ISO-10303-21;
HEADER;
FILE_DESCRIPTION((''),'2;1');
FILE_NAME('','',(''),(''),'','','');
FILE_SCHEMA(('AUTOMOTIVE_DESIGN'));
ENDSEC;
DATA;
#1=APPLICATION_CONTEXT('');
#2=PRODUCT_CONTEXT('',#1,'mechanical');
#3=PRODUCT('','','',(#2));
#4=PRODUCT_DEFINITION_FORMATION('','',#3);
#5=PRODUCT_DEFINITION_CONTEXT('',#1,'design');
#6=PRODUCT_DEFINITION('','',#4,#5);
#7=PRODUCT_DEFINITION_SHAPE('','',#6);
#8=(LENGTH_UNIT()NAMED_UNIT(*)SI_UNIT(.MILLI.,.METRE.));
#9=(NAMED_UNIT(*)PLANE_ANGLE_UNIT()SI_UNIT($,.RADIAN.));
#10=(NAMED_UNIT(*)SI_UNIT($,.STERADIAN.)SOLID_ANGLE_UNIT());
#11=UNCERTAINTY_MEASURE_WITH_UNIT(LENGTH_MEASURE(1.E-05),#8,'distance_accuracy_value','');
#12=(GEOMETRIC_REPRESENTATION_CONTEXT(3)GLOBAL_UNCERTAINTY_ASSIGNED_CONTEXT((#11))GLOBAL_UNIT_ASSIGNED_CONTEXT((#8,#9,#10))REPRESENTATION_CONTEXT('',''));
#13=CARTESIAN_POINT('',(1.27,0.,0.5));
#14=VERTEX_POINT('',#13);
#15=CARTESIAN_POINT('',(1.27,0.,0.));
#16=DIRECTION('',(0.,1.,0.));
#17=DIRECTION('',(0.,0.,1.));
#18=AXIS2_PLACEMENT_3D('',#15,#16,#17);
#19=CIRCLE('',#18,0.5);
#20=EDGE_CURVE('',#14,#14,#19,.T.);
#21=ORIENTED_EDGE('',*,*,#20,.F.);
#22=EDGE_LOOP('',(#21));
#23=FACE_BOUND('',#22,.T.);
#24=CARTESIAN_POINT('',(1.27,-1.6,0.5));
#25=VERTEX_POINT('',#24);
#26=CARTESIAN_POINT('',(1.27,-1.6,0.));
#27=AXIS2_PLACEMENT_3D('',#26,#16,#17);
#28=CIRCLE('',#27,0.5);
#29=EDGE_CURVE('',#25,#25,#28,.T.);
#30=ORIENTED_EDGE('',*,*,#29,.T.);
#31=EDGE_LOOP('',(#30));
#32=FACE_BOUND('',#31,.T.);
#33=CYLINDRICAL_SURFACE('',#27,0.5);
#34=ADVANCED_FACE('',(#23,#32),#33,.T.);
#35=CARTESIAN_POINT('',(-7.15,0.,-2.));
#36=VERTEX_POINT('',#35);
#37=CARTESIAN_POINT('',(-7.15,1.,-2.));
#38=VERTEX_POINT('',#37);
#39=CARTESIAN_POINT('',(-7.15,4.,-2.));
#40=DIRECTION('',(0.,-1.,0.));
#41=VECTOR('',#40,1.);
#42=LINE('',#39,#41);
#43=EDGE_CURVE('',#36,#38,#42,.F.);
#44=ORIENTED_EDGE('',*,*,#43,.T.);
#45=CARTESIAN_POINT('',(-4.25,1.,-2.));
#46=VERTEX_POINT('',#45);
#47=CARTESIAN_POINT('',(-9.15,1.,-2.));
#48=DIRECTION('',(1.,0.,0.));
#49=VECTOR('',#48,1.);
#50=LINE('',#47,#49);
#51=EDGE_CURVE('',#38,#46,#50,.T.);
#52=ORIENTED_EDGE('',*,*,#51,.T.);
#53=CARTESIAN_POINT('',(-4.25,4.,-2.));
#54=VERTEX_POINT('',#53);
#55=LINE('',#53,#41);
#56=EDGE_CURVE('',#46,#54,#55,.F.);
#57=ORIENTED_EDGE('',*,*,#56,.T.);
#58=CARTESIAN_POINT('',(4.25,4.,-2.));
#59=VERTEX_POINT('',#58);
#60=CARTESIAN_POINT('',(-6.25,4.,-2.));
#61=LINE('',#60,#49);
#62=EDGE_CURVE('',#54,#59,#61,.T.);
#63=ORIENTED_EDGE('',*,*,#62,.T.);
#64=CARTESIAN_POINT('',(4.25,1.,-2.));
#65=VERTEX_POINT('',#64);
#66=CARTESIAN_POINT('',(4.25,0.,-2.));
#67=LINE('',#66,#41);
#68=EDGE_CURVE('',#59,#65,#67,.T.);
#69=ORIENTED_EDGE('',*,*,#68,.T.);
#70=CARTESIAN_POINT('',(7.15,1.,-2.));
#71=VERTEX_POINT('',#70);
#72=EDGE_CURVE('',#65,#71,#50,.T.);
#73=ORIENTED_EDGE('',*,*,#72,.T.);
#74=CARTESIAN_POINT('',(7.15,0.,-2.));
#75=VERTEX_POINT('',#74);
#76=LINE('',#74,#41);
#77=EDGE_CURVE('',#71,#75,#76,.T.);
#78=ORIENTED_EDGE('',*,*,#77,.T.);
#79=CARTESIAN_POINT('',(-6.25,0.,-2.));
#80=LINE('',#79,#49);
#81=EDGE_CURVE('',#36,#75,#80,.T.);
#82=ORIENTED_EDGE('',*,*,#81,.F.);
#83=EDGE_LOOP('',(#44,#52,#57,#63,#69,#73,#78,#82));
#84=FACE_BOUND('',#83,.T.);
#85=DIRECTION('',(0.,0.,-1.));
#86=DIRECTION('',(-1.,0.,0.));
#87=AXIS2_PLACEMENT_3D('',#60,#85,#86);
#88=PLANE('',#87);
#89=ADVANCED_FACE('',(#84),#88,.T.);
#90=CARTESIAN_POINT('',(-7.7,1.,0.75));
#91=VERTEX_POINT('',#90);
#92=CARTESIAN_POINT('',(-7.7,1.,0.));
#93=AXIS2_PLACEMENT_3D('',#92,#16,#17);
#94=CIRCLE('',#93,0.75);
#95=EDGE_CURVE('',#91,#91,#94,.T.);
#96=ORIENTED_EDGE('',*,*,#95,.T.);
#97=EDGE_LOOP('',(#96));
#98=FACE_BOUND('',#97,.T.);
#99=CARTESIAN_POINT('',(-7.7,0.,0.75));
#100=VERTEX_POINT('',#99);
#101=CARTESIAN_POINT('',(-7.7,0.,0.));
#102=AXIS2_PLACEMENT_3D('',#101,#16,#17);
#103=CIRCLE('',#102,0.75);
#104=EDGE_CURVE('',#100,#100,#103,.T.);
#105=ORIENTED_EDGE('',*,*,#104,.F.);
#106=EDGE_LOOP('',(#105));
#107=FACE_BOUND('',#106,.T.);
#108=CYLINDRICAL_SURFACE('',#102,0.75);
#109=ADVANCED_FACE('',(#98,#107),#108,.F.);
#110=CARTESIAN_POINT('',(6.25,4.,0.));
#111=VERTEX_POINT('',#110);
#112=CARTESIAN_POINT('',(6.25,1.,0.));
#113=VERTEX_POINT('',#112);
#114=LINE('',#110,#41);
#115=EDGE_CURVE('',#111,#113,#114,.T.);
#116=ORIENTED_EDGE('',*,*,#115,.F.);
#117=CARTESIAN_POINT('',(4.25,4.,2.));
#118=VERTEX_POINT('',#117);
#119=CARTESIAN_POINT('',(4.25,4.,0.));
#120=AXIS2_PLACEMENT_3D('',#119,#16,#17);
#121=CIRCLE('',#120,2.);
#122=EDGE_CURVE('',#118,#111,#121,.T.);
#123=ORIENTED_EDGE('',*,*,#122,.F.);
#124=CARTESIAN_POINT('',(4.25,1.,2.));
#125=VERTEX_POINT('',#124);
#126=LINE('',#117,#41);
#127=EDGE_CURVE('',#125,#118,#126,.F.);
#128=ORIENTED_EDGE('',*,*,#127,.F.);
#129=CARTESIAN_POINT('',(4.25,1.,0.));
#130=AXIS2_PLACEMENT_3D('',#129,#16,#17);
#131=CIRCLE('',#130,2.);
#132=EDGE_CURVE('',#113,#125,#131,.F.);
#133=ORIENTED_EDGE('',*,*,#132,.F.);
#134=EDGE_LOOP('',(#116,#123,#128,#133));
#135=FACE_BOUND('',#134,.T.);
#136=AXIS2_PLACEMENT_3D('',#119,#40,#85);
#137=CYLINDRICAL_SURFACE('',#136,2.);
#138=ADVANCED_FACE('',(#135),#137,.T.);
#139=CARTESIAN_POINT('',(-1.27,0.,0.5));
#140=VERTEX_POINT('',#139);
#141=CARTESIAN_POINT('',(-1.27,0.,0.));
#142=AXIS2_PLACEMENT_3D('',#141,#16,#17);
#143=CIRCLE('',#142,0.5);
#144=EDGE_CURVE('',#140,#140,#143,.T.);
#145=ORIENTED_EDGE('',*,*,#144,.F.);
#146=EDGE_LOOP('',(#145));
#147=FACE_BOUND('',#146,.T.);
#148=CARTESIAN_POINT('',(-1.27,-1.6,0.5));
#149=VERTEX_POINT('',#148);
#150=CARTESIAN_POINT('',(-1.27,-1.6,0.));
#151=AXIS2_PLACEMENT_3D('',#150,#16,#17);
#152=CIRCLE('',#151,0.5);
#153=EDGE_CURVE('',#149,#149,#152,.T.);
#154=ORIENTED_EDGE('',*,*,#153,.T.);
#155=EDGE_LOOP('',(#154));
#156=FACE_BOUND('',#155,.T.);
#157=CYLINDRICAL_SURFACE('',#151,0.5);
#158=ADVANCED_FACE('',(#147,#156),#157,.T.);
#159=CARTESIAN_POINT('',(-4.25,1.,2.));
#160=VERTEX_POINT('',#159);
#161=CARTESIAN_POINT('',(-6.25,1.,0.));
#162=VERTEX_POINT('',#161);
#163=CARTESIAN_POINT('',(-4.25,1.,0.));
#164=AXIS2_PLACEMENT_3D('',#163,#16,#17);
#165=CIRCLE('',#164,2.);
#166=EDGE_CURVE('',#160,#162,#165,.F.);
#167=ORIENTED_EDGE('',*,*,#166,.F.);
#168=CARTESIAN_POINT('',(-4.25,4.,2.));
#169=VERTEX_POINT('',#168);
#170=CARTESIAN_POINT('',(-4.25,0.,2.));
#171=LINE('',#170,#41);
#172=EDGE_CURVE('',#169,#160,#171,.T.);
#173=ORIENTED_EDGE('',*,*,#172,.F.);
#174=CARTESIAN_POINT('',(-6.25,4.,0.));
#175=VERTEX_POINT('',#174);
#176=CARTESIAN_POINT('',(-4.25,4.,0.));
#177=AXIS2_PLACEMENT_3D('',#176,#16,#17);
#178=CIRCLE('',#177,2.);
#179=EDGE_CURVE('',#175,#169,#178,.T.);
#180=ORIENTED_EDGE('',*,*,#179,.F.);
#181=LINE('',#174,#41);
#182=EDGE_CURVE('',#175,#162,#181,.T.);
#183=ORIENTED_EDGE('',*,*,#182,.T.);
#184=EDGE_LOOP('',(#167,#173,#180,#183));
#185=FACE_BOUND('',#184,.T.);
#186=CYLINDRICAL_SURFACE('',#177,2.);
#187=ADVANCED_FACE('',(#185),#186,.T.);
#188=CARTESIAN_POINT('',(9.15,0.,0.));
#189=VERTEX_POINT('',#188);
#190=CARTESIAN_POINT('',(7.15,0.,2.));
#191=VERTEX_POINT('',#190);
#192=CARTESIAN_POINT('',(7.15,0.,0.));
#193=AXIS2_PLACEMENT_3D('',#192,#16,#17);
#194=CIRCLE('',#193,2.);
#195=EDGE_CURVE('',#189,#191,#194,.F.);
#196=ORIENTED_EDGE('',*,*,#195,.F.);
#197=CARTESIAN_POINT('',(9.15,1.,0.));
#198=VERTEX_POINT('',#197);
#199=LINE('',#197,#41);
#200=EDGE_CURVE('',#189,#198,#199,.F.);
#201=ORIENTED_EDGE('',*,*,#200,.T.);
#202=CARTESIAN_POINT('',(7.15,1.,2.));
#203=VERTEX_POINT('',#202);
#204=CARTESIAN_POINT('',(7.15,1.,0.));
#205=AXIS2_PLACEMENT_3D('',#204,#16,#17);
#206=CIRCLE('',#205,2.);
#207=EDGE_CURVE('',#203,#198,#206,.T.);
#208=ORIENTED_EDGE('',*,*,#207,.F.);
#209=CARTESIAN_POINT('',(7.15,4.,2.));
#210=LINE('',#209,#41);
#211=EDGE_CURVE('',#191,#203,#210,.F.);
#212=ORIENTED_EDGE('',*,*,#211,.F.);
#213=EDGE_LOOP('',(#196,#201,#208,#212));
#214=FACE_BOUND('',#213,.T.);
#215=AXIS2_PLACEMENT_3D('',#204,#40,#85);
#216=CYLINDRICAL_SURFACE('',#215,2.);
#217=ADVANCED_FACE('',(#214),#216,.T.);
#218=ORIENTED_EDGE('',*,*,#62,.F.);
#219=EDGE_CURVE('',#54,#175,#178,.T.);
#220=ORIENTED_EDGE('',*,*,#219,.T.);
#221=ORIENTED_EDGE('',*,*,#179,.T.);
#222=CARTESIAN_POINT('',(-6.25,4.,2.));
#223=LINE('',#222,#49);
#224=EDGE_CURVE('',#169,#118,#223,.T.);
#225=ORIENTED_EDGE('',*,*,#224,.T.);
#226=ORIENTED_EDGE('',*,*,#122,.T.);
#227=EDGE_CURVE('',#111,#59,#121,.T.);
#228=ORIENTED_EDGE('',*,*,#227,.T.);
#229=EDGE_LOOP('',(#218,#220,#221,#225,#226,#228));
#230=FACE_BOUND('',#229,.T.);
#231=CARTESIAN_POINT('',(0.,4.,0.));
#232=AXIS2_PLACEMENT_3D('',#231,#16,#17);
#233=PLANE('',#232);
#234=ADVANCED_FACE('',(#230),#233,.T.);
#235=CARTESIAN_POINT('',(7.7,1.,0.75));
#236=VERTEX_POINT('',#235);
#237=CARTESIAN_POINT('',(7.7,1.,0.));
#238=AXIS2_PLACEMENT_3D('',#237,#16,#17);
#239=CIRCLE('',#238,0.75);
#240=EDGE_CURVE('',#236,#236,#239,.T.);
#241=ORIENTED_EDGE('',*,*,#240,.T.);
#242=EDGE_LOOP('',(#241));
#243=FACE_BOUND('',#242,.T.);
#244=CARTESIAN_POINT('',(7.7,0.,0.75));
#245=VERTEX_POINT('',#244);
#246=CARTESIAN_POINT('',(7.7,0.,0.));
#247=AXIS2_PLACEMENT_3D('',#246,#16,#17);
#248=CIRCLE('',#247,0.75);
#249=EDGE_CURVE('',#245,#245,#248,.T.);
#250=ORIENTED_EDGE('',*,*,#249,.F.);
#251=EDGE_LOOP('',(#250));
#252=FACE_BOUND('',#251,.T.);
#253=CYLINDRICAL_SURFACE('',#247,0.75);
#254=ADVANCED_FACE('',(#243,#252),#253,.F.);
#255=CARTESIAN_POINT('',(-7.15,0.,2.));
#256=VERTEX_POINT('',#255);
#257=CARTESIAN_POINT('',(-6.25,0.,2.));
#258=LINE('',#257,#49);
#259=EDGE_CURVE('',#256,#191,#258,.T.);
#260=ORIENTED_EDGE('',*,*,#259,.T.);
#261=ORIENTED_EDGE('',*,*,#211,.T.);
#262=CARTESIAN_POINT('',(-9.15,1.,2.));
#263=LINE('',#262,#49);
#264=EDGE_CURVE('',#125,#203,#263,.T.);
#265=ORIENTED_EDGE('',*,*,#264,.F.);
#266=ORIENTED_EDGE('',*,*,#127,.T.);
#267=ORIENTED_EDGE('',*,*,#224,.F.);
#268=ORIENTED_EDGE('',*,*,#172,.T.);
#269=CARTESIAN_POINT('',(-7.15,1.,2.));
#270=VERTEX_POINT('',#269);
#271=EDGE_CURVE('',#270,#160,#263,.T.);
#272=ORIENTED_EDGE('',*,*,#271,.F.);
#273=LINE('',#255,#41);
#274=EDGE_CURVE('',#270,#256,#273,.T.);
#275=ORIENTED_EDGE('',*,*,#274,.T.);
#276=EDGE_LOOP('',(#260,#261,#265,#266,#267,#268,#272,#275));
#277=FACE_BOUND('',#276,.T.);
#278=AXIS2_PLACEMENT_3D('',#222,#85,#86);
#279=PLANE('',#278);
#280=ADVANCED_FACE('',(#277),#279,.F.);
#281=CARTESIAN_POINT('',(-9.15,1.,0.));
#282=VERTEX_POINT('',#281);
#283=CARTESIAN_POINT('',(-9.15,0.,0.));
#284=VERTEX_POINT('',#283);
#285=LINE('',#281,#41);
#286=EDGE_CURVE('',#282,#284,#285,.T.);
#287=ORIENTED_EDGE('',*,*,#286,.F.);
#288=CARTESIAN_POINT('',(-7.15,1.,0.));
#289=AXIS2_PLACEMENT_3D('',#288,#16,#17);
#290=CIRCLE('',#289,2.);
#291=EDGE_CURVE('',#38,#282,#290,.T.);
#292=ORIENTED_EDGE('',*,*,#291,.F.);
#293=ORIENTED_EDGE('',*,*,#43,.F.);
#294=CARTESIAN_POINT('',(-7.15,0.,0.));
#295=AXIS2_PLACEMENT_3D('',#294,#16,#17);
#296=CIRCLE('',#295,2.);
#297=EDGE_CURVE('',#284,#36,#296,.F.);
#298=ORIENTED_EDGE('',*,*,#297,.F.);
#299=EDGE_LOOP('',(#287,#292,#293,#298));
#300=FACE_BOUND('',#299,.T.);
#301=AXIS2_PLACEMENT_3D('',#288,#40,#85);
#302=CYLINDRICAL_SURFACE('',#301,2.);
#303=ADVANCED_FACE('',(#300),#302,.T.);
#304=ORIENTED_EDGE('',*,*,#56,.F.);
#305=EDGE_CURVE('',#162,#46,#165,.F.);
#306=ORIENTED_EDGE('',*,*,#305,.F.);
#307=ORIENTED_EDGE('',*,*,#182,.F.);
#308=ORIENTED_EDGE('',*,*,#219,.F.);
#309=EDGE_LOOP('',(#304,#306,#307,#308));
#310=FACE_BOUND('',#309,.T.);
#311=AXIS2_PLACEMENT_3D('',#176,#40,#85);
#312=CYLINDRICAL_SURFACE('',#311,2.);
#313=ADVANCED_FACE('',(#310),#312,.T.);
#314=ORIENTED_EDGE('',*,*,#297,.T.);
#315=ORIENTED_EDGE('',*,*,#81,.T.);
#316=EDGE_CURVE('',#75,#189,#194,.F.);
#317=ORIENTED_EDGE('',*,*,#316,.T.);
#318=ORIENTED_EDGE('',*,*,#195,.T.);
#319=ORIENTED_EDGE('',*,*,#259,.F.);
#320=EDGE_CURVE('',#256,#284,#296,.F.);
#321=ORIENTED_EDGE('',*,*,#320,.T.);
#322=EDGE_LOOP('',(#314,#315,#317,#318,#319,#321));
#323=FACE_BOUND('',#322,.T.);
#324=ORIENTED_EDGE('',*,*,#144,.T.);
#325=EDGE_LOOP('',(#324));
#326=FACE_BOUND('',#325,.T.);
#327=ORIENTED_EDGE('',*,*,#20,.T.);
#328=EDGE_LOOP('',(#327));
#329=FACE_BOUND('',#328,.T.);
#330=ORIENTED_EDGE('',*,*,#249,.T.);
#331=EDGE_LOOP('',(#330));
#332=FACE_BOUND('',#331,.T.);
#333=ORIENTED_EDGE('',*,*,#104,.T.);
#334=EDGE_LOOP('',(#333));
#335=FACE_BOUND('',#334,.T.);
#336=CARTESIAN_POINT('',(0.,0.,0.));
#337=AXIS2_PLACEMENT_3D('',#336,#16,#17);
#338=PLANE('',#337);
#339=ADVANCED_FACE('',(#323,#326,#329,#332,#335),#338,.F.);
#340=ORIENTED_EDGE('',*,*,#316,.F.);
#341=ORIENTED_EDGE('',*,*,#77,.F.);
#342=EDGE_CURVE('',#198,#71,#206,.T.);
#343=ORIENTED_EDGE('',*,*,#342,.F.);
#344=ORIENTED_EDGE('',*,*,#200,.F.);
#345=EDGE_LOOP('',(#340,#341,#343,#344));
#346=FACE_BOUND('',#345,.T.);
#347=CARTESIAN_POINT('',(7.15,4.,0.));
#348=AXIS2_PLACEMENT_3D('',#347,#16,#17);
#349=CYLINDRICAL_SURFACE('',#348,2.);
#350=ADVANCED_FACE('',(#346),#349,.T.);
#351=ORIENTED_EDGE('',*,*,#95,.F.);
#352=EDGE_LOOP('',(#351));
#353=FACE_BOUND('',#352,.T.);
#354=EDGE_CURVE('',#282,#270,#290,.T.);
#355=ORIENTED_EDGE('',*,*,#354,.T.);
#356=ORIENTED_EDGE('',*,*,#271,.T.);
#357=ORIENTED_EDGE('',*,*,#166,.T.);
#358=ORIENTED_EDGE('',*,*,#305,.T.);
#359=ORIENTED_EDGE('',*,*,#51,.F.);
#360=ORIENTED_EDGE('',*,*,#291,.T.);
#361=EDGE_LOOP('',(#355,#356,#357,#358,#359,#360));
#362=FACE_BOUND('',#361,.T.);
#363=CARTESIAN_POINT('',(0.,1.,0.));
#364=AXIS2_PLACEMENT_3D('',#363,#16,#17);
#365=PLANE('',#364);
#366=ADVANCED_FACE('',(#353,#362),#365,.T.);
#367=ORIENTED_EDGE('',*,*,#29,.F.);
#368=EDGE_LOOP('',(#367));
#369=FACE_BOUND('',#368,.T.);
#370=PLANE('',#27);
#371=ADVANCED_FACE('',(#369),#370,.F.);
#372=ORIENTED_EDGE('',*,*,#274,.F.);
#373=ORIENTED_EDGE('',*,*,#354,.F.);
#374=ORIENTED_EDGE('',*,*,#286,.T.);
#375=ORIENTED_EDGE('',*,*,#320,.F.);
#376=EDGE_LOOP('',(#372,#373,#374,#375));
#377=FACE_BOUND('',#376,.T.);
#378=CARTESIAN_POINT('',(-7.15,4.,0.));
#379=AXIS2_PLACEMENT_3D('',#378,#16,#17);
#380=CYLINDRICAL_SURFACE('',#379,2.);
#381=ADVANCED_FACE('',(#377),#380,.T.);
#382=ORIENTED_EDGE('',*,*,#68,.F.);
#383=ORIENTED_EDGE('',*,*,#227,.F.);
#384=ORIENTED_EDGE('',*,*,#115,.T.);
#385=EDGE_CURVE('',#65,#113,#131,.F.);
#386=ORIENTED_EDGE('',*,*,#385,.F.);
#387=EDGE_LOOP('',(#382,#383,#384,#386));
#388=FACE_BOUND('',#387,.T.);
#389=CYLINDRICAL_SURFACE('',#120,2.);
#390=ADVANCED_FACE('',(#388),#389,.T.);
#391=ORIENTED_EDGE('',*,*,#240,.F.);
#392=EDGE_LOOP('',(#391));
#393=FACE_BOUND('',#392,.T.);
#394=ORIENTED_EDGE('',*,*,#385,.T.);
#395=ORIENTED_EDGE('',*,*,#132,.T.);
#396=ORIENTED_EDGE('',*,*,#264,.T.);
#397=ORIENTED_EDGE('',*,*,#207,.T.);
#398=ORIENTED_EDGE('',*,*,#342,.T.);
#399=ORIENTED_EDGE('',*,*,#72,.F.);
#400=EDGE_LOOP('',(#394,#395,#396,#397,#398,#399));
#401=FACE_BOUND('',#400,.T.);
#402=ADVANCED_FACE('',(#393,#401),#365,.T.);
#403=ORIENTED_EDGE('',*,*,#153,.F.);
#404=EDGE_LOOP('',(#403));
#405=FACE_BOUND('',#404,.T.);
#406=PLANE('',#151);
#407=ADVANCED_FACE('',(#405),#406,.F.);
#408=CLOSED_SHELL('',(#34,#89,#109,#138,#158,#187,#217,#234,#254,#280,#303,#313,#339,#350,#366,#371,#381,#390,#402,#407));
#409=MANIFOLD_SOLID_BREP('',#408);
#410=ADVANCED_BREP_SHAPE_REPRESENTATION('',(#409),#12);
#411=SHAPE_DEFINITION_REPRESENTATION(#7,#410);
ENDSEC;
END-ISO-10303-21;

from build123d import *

# Parameters (mm, degrees)
SKETCH_1_W          = 12.5
SKETCH_1_H          = 4
EXTRUDE_1_DEPTH     = 4
FILLET_1_R          = 2
SKETCH_1_3_W        = 18.3
SKETCH_1_3_H        = 4
EXTRUDE_2_DEPTH     = 1
FILLET_2_R          = 2
SKETCH_2_R          = 0.75
CUT_EXTRUDE_1_DEPTH = 10.834759784
EXTRUDE_START       = -4
SKETCH_3_R          = 0.5
EXTRUDE_3_DEPTH     = 5.6


with BuildPart() as part:
    # 草图1 → 凸台-拉伸1 (new body)
    with BuildSketch(Plane(origin=(0, 0, 0), x_dir=(1, 0, 0), z_dir=(0, 1, 0))):
        Rectangle(SKETCH_1_W, SKETCH_1_H)
    extrude(amount=EXTRUDE_1_DEPTH)

    # 圆角1
    fillet_1_edges = [part.edges().sort_by_distance(p)[0] for p in [
        (6.25, 2, -2),
        (6.25, 2, 2),
        (-6.25, 2, 2),
        (-6.25, 2, -2),
    ]]
    fillet(fillet_1_edges, radius=FILLET_1_R - 0.0001)  # a hair under: the kernel refuses the full size

    # 草图1<3> → 凸台-拉伸2 (add)
    with BuildSketch(Plane(origin=(0, 0, 0), x_dir=(1, 0, 0), z_dir=(0, 1, 0))):
        Rectangle(SKETCH_1_3_W, SKETCH_1_3_H)
    extrude(amount=EXTRUDE_2_DEPTH)

    # 圆角2
    fillet_2_edges = [part.edges().sort_by_distance(p)[0] for p in [
        (9.15, 0.5, 2),
        (9.15, 0.5, -2),
        (-9.15, 0.5, 2),
        (-9.15, 0.5, -2),
    ]]
    fillet(fillet_2_edges, radius=FILLET_2_R - 0.0001)  # a hair under: the kernel refuses the full size

    # 草图2 → 切除-拉伸1 (cut, through all)
    with BuildSketch(Plane(origin=(0, 1, 0), x_dir=(1, 0, 0), z_dir=(0, 1, 0))):
        with Locations(Location((-7.7, 0, 0), (0, 0, 270))):
            Circle(SKETCH_2_R)
        with Locations(Location((7.7, 0, 0), (0, 0, 270))):
            Circle(SKETCH_2_R)
    extrude(amount=-CUT_EXTRUDE_1_DEPTH, mode=Mode.SUBTRACT)

    # 草图3 → 凸台-拉伸3 (add)
    with BuildSketch(Plane.XZ.offset(EXTRUDE_START)):
        with Locations(Location((-1.27, 0, 0), (0, 0, 90))):
            Circle(SKETCH_3_R)
        with Locations(Location((1.27, 0, 0), (0, 0, 90))):
            Circle(SKETCH_3_R)
    extrude(amount=EXTRUDE_3_DEPTH)


solid = part.part
